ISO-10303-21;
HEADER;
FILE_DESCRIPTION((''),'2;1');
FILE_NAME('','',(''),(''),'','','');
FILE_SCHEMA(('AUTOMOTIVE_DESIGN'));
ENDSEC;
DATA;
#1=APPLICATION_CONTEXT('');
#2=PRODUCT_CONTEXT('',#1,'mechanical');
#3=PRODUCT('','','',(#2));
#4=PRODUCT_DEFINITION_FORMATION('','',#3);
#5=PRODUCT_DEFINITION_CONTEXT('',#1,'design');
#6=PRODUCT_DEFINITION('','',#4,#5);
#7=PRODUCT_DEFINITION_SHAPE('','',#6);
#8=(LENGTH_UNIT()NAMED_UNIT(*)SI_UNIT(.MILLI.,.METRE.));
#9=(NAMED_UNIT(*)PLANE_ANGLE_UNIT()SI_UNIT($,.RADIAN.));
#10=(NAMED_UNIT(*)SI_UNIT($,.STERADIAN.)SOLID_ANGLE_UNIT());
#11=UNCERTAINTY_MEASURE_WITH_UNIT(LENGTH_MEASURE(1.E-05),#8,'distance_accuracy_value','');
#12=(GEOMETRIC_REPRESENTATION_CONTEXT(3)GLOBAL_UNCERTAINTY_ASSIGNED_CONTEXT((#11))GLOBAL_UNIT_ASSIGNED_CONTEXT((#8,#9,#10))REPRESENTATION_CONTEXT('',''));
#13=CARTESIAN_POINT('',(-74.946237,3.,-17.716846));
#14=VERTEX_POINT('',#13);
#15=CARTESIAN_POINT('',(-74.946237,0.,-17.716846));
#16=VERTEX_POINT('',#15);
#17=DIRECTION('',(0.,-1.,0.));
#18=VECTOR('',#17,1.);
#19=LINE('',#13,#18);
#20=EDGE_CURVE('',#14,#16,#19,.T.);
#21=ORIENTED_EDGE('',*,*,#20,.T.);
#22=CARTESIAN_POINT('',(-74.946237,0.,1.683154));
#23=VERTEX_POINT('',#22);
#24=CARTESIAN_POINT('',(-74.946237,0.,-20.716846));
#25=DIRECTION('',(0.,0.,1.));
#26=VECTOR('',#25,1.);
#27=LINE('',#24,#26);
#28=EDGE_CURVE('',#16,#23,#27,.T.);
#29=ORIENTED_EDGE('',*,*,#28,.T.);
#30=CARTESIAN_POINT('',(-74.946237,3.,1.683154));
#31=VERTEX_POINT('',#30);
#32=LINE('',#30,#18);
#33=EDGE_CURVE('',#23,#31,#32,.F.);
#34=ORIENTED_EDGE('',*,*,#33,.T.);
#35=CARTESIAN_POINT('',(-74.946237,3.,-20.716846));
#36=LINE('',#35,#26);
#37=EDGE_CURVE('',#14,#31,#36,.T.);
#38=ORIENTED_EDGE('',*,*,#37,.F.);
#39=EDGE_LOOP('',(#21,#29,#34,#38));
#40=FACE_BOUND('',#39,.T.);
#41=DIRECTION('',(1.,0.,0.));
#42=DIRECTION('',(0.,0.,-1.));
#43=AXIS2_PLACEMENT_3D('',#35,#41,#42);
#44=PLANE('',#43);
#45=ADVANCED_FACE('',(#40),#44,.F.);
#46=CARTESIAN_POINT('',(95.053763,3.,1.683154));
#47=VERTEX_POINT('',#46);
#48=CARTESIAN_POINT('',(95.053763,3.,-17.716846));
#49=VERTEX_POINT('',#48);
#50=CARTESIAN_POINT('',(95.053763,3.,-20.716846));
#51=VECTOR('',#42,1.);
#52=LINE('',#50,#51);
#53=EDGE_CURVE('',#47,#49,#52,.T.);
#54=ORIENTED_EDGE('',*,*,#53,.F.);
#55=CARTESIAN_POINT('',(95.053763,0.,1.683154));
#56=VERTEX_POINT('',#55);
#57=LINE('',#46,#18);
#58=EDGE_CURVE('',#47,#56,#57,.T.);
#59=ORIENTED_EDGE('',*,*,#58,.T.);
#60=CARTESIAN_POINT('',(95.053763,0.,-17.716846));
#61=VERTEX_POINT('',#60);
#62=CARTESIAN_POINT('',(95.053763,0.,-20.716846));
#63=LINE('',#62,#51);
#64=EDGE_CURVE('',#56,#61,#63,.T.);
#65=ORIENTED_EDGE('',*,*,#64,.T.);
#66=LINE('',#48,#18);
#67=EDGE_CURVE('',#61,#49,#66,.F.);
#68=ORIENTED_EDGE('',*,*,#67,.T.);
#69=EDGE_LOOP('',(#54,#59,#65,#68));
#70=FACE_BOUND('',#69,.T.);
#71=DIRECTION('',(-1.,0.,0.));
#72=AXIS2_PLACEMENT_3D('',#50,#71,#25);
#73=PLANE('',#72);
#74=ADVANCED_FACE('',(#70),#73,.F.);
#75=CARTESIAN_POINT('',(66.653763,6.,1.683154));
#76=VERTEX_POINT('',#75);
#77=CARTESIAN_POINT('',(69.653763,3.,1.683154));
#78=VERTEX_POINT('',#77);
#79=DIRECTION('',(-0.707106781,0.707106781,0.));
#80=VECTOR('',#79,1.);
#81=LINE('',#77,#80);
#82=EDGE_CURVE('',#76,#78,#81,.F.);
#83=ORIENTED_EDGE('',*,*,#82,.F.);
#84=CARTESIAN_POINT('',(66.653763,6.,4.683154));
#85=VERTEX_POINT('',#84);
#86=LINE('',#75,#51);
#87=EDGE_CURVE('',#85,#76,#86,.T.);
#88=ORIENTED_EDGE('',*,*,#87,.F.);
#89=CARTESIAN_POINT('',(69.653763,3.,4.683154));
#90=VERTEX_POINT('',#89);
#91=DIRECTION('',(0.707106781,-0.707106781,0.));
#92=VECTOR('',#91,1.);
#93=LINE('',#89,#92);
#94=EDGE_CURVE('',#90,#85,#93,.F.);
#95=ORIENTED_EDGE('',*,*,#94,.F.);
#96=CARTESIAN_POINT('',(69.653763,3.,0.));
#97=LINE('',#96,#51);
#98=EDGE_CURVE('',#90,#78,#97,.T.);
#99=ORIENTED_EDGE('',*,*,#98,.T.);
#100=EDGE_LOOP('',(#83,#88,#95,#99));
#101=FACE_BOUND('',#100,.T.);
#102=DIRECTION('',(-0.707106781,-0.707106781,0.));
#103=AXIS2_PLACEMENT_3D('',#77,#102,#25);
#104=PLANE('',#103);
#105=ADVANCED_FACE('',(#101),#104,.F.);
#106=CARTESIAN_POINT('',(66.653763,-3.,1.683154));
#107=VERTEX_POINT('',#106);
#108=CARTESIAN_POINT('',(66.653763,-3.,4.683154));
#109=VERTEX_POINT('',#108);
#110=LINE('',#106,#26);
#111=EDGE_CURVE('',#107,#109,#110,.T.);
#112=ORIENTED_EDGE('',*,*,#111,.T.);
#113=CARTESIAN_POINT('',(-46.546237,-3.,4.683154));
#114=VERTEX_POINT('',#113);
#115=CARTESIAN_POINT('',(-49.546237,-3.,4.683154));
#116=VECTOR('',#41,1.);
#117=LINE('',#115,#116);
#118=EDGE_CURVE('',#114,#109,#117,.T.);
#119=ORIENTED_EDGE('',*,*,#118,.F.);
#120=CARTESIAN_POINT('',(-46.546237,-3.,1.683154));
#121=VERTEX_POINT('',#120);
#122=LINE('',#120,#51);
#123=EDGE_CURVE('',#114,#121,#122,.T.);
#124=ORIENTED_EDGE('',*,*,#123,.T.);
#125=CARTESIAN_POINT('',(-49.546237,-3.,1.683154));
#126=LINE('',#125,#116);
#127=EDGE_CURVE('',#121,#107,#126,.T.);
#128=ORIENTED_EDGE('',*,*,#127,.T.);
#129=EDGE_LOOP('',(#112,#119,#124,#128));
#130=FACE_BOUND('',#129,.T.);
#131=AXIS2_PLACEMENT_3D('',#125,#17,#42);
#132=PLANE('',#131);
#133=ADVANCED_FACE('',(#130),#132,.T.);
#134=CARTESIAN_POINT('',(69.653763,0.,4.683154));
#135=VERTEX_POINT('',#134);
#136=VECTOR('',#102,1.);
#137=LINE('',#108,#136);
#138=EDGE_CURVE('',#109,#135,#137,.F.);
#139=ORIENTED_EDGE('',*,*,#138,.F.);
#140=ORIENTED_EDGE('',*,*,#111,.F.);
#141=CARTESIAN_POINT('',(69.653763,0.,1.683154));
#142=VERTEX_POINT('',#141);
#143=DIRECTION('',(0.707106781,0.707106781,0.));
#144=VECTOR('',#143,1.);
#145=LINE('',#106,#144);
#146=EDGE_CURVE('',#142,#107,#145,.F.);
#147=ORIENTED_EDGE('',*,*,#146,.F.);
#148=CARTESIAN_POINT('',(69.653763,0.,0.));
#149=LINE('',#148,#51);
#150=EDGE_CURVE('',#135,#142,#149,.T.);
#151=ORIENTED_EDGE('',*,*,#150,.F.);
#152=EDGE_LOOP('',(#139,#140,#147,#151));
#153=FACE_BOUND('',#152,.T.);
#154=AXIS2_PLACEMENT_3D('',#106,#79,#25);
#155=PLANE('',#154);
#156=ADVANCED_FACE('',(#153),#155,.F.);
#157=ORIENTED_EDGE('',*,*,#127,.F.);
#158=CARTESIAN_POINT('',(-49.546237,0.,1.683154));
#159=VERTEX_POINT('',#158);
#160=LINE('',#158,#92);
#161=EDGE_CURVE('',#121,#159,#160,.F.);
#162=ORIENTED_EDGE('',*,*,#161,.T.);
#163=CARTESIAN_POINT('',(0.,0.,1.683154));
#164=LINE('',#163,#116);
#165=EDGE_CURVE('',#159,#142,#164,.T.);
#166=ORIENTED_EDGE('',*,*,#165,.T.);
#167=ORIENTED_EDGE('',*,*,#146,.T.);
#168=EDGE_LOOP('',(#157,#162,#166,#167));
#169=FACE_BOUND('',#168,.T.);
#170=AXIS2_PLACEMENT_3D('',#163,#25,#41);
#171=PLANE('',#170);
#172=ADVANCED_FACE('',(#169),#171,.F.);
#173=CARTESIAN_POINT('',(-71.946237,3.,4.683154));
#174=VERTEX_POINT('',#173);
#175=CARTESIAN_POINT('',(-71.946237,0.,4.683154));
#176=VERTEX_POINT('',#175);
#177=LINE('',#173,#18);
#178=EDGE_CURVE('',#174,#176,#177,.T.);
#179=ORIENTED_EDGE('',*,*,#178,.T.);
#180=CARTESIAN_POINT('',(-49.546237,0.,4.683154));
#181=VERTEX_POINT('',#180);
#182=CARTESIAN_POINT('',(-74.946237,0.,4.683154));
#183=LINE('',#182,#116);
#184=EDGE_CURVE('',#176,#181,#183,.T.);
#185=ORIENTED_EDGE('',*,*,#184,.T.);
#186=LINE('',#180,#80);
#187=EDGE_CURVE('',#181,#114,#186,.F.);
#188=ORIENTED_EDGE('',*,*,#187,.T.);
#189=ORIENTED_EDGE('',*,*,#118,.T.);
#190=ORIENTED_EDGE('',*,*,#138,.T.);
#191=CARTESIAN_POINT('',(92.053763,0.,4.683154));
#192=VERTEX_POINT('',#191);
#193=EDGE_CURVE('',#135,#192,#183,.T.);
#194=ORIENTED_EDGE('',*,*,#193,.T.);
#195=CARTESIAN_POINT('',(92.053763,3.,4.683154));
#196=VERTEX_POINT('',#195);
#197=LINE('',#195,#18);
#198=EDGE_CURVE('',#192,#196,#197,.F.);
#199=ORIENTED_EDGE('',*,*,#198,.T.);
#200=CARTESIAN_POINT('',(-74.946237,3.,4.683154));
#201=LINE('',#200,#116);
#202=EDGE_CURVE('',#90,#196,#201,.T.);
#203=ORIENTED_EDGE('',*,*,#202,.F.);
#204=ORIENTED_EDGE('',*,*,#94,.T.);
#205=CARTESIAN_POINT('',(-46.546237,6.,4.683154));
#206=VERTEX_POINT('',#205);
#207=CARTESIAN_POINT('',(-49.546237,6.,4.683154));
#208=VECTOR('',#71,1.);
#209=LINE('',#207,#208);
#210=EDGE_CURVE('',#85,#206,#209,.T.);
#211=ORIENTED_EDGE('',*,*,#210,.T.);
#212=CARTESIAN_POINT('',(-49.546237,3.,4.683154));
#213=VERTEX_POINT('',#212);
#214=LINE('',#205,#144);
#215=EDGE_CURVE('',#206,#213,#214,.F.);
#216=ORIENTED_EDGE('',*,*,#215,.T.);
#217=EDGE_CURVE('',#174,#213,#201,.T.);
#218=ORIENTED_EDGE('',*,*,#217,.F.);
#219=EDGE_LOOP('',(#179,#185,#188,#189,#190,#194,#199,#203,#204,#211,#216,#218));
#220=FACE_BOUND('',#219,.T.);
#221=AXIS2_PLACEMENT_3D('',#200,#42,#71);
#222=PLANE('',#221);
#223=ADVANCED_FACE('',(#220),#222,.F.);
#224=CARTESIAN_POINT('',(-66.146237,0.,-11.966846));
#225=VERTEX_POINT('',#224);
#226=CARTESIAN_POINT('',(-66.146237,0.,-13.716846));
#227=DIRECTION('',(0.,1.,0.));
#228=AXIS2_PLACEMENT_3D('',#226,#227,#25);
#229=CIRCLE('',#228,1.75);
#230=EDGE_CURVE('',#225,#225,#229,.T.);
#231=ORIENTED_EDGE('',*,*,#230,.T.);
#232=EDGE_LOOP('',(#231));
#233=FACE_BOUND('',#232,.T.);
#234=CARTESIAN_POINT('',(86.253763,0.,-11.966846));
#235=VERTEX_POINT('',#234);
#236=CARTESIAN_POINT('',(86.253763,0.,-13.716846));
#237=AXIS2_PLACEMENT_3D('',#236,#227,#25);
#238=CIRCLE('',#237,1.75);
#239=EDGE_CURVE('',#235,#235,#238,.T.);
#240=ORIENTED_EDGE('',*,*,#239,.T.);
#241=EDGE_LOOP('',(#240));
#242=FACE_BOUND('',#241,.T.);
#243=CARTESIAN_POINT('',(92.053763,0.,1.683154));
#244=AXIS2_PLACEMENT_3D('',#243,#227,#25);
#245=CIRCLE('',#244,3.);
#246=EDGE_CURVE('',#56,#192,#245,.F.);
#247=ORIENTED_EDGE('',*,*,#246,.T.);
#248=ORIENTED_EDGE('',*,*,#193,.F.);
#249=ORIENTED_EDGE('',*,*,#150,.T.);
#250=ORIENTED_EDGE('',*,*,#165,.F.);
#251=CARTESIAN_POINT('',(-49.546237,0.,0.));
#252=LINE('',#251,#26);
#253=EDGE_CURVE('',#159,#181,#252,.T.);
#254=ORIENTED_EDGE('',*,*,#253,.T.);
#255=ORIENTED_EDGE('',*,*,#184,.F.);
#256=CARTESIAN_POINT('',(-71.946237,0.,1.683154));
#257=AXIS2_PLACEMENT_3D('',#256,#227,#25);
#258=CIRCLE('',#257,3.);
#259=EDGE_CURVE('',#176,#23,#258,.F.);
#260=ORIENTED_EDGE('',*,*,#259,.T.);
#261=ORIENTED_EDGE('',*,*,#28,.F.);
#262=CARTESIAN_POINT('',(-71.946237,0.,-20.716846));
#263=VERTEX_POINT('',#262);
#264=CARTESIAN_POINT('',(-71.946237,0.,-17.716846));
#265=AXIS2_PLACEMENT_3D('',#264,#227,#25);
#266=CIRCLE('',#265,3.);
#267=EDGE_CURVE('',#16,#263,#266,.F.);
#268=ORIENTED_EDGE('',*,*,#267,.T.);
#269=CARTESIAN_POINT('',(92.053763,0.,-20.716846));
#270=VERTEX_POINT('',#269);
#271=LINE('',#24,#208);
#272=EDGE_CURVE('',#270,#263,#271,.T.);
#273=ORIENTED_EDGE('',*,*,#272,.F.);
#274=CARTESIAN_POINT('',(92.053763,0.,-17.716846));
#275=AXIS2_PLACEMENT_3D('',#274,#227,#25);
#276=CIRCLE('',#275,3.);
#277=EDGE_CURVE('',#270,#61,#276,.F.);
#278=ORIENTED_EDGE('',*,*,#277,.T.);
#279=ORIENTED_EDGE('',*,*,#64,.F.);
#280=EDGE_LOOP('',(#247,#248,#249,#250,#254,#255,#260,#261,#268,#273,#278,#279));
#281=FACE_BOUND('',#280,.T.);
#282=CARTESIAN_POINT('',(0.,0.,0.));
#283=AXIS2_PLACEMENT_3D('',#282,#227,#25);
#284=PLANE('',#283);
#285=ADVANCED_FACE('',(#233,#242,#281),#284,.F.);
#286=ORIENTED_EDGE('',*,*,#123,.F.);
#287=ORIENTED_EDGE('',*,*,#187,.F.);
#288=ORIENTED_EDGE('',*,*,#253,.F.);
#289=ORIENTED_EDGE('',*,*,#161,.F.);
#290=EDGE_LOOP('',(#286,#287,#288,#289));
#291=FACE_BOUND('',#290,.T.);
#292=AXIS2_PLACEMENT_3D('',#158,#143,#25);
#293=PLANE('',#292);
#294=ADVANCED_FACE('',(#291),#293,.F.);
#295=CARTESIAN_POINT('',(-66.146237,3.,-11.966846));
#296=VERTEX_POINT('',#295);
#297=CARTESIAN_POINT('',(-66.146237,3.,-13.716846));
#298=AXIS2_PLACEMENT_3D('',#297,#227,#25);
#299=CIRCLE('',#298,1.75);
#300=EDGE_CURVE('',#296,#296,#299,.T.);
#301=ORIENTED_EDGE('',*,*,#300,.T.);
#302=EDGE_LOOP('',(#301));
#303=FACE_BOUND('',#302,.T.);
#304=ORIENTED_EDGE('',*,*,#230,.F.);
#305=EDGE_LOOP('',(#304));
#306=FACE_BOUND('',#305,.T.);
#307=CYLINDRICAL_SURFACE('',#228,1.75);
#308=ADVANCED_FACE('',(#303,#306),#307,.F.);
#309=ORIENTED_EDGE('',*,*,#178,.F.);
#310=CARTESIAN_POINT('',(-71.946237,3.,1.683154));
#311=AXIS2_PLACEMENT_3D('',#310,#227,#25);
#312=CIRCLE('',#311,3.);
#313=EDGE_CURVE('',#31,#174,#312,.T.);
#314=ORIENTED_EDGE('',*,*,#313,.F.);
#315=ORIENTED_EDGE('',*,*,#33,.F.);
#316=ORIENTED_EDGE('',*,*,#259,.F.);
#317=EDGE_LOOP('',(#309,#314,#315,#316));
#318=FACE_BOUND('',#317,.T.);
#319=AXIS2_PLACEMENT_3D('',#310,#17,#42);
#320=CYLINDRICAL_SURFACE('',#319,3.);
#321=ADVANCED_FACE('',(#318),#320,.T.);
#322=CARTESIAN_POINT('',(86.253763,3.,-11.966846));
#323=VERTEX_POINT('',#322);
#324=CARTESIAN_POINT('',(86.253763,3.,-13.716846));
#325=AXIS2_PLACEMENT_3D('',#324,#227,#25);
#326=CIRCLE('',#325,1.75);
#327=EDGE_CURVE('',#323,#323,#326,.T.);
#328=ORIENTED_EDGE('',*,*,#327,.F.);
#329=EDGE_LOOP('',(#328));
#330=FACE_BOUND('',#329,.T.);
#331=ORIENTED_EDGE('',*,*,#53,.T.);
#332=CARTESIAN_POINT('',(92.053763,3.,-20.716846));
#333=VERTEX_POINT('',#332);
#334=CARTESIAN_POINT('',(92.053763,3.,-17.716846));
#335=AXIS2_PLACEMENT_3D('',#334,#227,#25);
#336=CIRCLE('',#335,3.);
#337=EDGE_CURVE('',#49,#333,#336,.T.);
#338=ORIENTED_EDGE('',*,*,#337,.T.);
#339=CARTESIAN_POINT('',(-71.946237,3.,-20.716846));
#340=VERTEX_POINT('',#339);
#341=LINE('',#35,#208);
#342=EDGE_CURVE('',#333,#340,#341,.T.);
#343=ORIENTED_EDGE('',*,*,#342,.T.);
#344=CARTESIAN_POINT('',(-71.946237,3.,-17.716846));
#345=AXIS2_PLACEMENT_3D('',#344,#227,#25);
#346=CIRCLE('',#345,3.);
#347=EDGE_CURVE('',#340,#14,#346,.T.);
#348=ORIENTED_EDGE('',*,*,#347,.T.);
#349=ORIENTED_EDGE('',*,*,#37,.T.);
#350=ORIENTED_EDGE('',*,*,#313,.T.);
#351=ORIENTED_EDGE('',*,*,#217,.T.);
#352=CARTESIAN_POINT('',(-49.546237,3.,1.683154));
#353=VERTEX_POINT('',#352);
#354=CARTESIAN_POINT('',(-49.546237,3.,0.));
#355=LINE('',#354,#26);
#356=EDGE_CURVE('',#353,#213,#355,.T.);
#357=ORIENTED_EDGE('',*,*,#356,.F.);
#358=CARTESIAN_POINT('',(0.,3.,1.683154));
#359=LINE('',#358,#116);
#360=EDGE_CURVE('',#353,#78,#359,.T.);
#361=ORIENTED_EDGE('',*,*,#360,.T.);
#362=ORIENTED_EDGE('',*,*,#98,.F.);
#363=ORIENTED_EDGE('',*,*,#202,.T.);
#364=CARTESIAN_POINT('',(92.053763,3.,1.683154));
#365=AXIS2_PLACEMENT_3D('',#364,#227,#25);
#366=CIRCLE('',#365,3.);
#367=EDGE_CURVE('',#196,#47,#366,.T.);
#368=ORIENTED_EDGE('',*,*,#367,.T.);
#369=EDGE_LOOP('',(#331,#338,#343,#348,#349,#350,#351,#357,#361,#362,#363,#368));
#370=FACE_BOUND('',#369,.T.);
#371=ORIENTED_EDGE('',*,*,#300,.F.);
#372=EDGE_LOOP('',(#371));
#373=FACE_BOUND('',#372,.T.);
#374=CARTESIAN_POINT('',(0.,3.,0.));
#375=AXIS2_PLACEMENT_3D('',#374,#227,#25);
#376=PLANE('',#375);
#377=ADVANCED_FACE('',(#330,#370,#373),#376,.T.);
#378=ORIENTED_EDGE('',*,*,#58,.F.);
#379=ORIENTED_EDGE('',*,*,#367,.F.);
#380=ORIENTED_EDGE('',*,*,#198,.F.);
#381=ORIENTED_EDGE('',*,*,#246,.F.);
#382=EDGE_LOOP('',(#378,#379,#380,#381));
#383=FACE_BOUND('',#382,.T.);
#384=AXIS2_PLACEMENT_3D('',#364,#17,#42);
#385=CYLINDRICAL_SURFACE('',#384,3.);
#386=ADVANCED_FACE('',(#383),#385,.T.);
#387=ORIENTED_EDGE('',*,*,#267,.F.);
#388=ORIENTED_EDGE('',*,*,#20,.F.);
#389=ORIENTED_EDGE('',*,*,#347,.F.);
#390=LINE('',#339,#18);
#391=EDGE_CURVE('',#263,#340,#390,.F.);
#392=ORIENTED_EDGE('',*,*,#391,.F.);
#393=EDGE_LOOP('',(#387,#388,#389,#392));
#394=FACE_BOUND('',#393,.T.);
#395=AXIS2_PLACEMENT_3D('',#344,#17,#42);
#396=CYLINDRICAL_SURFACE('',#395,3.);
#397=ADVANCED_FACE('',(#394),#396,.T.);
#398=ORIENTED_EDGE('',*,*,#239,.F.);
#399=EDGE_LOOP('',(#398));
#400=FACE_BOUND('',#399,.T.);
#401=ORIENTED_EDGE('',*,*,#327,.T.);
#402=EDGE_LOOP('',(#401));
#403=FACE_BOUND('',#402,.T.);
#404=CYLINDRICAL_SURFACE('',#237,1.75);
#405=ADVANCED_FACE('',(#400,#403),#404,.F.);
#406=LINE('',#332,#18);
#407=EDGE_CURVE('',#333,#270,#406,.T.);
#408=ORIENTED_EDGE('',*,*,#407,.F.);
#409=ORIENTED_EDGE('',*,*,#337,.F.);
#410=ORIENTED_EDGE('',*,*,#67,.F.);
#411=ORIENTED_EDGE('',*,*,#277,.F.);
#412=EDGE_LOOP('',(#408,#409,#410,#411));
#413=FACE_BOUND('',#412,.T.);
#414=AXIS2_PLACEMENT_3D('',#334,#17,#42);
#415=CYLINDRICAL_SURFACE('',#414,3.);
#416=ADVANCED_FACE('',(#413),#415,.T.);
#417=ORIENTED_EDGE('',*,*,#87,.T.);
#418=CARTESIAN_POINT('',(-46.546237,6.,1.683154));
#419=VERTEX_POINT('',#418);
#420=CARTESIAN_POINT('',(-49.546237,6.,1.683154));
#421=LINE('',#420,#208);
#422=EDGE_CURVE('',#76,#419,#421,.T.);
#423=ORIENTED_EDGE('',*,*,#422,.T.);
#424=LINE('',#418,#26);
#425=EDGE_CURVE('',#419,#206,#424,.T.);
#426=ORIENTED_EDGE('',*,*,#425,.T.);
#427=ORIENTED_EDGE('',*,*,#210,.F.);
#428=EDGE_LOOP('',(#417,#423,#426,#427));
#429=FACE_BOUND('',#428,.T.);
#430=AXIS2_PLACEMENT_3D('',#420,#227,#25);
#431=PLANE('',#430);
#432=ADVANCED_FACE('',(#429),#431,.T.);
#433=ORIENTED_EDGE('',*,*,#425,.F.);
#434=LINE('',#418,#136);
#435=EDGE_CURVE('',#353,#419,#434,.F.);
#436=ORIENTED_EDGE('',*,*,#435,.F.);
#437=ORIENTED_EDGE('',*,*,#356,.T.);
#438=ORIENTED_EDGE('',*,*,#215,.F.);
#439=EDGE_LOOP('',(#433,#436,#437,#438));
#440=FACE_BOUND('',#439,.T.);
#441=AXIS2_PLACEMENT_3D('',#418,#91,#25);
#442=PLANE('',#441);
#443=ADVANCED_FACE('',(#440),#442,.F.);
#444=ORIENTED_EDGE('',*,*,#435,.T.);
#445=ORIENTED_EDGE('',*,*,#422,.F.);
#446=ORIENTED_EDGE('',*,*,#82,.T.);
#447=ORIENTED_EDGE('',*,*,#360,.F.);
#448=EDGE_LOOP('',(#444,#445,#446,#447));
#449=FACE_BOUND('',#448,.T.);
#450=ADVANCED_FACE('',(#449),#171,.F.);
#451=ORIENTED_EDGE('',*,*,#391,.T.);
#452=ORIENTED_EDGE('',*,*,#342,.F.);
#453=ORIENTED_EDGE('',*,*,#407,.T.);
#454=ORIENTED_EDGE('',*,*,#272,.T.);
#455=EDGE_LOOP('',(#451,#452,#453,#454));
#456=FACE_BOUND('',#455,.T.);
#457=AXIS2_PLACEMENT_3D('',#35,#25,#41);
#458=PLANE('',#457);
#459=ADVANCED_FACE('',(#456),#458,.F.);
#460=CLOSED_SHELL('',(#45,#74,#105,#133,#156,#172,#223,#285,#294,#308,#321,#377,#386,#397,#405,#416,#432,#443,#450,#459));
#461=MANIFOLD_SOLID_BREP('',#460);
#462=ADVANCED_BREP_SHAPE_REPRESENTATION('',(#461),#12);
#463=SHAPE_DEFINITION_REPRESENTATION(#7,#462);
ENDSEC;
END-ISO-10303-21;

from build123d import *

# Parameters (mm, degrees)
SKETCH1_W           = 170
SKETCH1_H           = 25.4
BOSS_EXTRUDE1_DEPTH = 3
FILLET1_R           = 3
SKETCH2_R           = 1.75
CUT_EXTRUDE1_DEPTH  = 3
SKETCH3_W           = 119.2
SKETCH3_H           = 9
BOSS_EXTRUDE2_DEPTH = 3
CHAMFER1_SIZE       = 3


with BuildPart() as part:
    # Sketch1 → Boss-Extrude1 (new body)
    with BuildSketch(Plane(origin=(0, 0, 0), x_dir=(1, 0, 0), z_dir=(0, 1, 0))):
        with Locations((10.053763441, 8.016845878)):
            Rectangle(SKETCH1_W, SKETCH1_H)
    extrude(amount=BOSS_EXTRUDE1_DEPTH)

    # Fillet1
    fillet1_edges = [part.edges().sort_by_distance(p)[0] for p in [
        (-74.946236559, 1.5, -20.716845878),
        (95.053763441, 1.5, -20.716845878),
        (95.053763441, 1.5, 4.683154122),
        (-74.946236559, 1.5, 4.683154122),
    ]]
    fillet(fillet1_edges, radius=FILLET1_R)

    # Sketch2 → Cut-Extrude1 (cut)
    with BuildSketch(Plane(origin=(0, 3, 0), x_dir=(1, 0, 0), z_dir=(0, 1, 0))):
        with Locations(Location((86.253763441, 13.716845878, 0), (0, 0, 270))):
            Circle(SKETCH2_R)
        with Locations(Location((-66.146236559, 13.716845878, 0), (0, 0, 270))):
            Circle(SKETCH2_R)
    extrude(amount=-CUT_EXTRUDE1_DEPTH, mode=Mode.SUBTRACT)

    # Sketch3 → Boss-Extrude2 (add)
    with BuildSketch(Plane.XY.offset(4.683154122)):
        with Locations((10.053763441, 1.5)):
            Rectangle(SKETCH3_W, SKETCH3_H)
    extrude(amount=-BOSS_EXTRUDE2_DEPTH)

    # Chamfer1
    chamfer1_edges = [part.edges().sort_by_distance(p)[0] for p in [
        (-49.546236559, -3, 3.183154122),
        (69.653763441, -3, 3.183154122),
        (69.653763441, 6, 3.183154122),
        (-49.546236559, 6, 3.183154122),
    ]]
    chamfer(chamfer1_edges, length=CHAMFER1_SIZE - 0.0001)  # a hair under: the kernel refuses the full size


solid = part.part
